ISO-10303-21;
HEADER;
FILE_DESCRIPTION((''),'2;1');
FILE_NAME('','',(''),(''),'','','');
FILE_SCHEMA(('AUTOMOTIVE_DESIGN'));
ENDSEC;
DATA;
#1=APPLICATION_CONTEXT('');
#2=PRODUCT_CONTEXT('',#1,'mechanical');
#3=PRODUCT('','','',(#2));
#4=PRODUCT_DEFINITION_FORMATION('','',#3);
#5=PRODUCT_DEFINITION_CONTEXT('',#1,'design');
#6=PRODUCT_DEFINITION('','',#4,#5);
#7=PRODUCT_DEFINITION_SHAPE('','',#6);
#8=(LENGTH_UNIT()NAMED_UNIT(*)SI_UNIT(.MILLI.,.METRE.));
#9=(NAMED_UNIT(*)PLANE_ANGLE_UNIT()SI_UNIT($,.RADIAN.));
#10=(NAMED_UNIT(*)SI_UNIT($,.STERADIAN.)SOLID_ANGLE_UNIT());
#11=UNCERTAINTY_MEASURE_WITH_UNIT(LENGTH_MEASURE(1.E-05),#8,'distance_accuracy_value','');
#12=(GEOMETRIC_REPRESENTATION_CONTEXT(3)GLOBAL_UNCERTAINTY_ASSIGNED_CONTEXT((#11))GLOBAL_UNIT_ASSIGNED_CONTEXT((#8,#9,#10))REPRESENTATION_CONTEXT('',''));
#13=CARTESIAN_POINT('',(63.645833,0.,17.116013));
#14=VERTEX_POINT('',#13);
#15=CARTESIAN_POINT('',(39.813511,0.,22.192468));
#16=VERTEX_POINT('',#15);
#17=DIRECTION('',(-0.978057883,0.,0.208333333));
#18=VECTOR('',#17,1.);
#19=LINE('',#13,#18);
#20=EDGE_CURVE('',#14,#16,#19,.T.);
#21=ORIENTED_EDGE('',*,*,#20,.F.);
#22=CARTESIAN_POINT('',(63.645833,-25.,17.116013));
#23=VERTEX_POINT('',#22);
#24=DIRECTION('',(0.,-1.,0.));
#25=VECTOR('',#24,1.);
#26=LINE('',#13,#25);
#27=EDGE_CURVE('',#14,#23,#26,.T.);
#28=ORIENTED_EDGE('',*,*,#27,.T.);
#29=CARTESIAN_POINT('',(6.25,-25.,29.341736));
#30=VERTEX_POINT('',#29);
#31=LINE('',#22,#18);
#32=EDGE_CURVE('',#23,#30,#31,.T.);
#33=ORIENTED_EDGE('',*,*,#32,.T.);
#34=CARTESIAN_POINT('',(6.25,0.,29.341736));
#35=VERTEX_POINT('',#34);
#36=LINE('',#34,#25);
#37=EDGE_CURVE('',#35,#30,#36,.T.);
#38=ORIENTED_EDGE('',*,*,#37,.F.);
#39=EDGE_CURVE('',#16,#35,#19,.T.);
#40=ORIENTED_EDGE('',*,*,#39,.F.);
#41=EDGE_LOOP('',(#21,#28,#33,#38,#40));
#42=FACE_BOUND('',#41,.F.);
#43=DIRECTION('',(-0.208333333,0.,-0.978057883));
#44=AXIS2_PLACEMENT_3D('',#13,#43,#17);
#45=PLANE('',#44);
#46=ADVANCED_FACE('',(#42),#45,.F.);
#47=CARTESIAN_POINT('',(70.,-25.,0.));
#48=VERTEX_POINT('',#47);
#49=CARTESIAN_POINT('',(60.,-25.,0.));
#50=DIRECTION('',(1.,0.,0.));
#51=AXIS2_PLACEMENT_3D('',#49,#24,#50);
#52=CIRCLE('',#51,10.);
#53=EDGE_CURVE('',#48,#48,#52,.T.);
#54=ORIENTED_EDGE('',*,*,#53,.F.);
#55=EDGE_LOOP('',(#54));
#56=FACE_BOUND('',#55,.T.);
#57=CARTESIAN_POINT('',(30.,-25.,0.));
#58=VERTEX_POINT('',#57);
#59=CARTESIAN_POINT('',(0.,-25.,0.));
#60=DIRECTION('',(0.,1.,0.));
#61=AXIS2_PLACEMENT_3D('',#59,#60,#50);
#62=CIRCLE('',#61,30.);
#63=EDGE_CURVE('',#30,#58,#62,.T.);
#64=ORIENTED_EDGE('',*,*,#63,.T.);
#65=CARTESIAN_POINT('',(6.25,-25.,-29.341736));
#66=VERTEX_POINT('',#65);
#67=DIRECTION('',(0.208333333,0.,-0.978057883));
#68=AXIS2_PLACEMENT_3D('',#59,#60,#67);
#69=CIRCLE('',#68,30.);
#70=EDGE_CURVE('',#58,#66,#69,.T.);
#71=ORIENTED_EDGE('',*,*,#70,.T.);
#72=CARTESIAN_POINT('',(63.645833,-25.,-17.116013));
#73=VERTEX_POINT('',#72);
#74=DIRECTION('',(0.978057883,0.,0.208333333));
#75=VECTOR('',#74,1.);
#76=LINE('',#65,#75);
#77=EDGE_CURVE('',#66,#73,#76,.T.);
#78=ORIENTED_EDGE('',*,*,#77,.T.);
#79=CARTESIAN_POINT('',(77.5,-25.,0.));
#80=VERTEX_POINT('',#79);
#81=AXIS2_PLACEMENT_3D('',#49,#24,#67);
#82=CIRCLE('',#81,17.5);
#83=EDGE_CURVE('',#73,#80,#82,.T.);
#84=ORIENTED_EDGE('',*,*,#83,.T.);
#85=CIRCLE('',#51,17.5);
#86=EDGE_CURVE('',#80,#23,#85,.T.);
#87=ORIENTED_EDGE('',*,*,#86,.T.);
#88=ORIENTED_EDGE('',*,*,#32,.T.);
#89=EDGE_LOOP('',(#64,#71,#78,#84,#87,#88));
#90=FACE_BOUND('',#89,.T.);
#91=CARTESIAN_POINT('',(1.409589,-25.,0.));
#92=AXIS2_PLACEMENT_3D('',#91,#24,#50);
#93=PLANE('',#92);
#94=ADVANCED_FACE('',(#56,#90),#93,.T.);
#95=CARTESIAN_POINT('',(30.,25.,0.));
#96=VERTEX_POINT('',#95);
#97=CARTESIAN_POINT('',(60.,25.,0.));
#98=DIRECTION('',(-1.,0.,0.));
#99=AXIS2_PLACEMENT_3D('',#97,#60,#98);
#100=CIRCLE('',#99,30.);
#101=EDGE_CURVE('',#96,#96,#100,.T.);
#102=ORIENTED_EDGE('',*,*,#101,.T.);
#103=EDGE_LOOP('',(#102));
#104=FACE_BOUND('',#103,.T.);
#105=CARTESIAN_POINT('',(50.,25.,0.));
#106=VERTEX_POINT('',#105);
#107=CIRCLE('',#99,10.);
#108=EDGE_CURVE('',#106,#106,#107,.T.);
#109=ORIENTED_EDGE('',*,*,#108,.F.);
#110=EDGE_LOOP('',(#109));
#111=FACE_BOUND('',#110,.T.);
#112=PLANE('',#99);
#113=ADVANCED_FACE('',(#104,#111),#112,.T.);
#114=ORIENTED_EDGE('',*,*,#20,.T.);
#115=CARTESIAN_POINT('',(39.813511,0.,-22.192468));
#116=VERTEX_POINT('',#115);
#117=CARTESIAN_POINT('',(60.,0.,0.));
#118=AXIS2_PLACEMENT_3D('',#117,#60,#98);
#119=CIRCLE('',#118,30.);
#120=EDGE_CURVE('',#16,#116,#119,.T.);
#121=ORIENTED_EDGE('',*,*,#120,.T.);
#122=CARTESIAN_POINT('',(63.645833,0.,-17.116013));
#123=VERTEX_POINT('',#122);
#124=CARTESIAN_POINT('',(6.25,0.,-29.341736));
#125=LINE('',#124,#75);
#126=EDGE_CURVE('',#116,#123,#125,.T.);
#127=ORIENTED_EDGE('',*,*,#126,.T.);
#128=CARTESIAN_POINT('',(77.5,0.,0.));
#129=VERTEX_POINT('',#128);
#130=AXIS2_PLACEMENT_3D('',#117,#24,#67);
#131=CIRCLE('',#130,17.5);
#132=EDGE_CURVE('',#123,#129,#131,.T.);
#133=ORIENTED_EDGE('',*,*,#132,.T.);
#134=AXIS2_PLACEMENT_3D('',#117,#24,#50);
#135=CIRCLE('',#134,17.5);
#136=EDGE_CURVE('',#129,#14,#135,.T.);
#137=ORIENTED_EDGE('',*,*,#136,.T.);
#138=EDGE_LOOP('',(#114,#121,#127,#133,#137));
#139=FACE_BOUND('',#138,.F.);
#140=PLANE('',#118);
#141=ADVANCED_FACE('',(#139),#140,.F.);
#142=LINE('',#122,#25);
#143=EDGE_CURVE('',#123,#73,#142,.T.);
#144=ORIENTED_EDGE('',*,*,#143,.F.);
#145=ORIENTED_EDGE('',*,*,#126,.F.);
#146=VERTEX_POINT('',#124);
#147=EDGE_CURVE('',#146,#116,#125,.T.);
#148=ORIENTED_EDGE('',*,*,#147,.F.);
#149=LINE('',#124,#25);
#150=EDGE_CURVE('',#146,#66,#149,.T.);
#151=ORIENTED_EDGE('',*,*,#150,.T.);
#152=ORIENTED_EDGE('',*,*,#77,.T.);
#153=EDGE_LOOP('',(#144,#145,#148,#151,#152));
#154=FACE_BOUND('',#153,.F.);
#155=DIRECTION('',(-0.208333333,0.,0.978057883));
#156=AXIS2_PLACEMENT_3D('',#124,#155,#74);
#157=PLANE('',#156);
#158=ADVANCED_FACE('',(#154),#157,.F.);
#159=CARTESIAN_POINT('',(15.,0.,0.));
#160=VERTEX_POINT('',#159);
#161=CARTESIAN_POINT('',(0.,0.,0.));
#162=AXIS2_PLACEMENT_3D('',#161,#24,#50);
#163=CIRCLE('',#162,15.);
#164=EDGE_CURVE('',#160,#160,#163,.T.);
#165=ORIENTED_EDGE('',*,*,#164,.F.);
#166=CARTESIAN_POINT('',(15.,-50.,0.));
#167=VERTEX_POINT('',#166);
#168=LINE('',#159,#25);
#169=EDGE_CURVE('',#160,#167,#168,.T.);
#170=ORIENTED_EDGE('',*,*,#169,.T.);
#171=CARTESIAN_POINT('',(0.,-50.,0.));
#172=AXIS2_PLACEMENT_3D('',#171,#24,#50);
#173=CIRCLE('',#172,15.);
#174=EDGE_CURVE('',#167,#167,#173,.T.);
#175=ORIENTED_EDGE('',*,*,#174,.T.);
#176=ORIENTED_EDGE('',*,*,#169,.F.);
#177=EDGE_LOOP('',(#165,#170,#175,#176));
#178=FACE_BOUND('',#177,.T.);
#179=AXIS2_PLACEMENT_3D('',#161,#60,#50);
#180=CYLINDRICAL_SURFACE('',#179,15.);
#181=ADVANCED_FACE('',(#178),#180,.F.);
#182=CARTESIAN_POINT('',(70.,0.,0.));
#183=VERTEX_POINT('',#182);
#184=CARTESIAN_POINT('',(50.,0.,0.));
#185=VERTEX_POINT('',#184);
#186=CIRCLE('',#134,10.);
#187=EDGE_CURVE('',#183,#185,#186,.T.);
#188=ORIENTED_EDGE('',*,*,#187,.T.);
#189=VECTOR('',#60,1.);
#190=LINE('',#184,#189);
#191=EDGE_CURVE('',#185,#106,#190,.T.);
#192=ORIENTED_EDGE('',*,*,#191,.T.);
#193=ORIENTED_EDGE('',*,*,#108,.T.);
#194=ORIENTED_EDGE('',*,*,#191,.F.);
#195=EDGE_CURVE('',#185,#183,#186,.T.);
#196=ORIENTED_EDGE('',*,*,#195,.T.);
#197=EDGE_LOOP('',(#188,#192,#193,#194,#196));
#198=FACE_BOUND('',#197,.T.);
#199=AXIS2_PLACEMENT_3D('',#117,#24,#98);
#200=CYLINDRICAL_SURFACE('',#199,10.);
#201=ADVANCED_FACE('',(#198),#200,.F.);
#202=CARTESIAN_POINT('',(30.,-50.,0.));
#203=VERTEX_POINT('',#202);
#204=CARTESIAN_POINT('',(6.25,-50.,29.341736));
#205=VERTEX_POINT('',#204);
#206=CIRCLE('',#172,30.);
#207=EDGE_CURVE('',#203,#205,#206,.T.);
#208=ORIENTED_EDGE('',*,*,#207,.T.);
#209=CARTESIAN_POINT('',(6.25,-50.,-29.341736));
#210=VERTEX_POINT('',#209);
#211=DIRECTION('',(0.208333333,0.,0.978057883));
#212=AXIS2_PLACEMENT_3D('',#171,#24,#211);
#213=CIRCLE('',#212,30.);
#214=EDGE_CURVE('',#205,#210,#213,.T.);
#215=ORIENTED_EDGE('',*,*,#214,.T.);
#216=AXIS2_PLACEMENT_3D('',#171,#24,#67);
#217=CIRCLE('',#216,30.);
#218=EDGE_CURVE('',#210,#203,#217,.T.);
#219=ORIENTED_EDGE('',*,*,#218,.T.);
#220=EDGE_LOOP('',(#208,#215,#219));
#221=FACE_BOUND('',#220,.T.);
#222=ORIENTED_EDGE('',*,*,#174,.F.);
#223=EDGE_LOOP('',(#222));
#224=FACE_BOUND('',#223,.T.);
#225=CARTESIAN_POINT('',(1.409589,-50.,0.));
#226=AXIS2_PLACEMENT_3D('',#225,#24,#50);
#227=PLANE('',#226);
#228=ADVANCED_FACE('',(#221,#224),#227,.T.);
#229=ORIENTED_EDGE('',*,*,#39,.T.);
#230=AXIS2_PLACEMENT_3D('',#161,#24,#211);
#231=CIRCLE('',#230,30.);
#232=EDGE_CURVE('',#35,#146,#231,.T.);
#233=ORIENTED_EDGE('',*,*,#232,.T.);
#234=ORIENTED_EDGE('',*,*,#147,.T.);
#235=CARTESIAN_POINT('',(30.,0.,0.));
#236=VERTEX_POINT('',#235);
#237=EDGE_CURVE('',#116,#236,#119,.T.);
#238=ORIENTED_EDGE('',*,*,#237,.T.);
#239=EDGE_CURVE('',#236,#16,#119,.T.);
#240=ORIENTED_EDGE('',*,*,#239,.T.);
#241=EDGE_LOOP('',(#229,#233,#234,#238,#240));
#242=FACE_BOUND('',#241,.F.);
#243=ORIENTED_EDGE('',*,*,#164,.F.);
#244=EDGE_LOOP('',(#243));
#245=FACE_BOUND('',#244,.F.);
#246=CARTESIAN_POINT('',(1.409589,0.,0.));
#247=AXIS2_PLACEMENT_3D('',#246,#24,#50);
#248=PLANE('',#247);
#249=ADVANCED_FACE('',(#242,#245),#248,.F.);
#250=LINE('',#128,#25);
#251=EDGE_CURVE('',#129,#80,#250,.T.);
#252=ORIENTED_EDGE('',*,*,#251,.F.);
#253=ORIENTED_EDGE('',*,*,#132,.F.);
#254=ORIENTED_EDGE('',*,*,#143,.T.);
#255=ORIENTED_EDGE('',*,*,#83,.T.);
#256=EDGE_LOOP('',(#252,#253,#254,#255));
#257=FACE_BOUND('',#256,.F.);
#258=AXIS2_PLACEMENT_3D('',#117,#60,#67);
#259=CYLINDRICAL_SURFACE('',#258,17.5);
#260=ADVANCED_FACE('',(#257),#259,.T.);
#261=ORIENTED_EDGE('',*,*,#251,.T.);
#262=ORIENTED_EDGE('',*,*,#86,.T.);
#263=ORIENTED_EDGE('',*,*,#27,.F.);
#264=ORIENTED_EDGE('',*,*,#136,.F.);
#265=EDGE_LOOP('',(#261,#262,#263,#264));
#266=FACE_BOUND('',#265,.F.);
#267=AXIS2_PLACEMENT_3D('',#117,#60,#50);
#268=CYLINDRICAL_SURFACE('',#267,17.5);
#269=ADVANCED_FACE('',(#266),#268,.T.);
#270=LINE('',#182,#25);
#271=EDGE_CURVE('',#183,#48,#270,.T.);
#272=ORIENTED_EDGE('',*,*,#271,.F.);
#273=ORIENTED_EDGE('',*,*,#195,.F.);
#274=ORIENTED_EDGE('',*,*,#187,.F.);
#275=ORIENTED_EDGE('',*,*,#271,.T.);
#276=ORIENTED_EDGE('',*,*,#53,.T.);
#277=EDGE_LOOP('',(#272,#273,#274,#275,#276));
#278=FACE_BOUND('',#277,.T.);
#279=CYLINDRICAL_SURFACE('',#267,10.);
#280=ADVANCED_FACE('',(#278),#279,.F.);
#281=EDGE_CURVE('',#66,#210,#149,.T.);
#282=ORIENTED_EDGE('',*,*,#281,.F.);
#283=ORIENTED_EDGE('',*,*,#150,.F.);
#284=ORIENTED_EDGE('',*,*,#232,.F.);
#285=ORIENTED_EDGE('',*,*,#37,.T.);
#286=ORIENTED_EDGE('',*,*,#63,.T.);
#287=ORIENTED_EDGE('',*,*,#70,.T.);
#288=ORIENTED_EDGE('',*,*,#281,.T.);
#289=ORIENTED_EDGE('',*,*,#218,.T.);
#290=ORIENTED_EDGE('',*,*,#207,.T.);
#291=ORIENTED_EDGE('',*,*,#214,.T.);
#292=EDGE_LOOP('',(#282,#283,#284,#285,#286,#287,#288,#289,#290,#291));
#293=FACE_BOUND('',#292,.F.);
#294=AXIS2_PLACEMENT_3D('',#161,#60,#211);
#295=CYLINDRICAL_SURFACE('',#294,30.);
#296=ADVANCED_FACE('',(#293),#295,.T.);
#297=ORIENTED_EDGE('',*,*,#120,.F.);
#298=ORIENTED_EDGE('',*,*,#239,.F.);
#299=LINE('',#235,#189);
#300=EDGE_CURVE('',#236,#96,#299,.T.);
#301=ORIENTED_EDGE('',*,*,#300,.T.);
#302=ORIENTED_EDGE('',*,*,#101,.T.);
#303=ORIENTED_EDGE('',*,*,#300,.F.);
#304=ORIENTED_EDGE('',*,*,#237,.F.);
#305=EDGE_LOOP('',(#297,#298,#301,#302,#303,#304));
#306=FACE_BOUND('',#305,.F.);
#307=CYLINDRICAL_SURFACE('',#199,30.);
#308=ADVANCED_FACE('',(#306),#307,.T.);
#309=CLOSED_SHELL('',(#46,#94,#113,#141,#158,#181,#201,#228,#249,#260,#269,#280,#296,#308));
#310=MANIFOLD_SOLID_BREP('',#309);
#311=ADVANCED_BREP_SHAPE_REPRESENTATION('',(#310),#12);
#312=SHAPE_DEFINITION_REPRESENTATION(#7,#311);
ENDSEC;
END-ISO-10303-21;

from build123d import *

# Parameters (mm, degrees)
F0_R     = 15
F0_R_2   = 10
F1_DEPTH = 25
F2_DEPTH = 50
F3_R     = 30
F3_R_2   = 10
F4_DEPTH = 25


# Not quite as in the source:
# - a feature names something its author has since deleted; it is built from what else it names


with BuildPart() as f1:
    # F0 (on Front) → F1 (new body)
    with BuildSketch(Plane.XZ):
        with BuildLine():
            ThreePointArc((6.25, -29.3417364858), (23.3184476327, -18.8745860882), (30, 0))
            ThreePointArc((30, 0), (23.3184476327, 18.8745860882), (6.25, 29.3417364858))
            ThreePointArc((6.25, 29.3417364858), (-30, 0), (6.25, -29.3417364858))
        make_face()
        Circle(F0_R, mode=Mode.SUBTRACT)
        with BuildLine():
            ThreePointArc((6.25, 29.3417364858), (23.3184476327, 18.8745860882), (30, 0))
            ThreePointArc((30, 0), (23.3184476327, -18.8745860882), (6.25, -29.3417364858))
            Line((6.25, -29.3417364858), (63.6458333333, -17.11601295))
            ThreePointArc((63.6458333333, -17.11601295), (42.5, 0), (63.6458333333, 17.11601295))
            Line((63.6458333333, 17.11601295), (6.25, 29.3417364858))
        make_face()
        with BuildLine():
            ThreePointArc((77.5, 0), (73.6024277858, 11.0101752181), (63.6458333333, 17.11601295))
            ThreePointArc((63.6458333333, 17.11601295), (42.5, 0), (63.6458333333, -17.11601295))
            ThreePointArc((63.6458333333, -17.11601295), (73.6024277858, -11.0101752181), (77.5, 0))
        make_face()
        with Locations((60, 0)):
            Circle(F0_R_2, mode=Mode.SUBTRACT)
    extrude(amount=F1_DEPTH)

    # F0 (on Front) → F2 (join)
    with BuildSketch(Plane.XZ):
        with BuildLine():
            ThreePointArc((6.25, -29.3417364858), (23.3184476327, -18.8745860882), (30, 0))
            ThreePointArc((30, 0), (23.3184476327, 18.8745860882), (6.25, 29.3417364858))
            ThreePointArc((6.25, 29.3417364858), (-30, 0), (6.25, -29.3417364858))
        make_face()
        Circle(F0_R, mode=Mode.SUBTRACT)
    extrude(amount=F2_DEPTH)

    # F3 (on face) → F4 (join)
    with BuildSketch(Plane(origin=(0, 0, 0), x_dir=(-1, 0, 0), z_dir=(0, 1, 0))):
        with Locations((-60, 0)):
            Circle(F3_R)
        with Locations((-60, 0)):
            Circle(F3_R_2, mode=Mode.SUBTRACT)
    extrude(amount=F4_DEPTH)


solid = f1.part
